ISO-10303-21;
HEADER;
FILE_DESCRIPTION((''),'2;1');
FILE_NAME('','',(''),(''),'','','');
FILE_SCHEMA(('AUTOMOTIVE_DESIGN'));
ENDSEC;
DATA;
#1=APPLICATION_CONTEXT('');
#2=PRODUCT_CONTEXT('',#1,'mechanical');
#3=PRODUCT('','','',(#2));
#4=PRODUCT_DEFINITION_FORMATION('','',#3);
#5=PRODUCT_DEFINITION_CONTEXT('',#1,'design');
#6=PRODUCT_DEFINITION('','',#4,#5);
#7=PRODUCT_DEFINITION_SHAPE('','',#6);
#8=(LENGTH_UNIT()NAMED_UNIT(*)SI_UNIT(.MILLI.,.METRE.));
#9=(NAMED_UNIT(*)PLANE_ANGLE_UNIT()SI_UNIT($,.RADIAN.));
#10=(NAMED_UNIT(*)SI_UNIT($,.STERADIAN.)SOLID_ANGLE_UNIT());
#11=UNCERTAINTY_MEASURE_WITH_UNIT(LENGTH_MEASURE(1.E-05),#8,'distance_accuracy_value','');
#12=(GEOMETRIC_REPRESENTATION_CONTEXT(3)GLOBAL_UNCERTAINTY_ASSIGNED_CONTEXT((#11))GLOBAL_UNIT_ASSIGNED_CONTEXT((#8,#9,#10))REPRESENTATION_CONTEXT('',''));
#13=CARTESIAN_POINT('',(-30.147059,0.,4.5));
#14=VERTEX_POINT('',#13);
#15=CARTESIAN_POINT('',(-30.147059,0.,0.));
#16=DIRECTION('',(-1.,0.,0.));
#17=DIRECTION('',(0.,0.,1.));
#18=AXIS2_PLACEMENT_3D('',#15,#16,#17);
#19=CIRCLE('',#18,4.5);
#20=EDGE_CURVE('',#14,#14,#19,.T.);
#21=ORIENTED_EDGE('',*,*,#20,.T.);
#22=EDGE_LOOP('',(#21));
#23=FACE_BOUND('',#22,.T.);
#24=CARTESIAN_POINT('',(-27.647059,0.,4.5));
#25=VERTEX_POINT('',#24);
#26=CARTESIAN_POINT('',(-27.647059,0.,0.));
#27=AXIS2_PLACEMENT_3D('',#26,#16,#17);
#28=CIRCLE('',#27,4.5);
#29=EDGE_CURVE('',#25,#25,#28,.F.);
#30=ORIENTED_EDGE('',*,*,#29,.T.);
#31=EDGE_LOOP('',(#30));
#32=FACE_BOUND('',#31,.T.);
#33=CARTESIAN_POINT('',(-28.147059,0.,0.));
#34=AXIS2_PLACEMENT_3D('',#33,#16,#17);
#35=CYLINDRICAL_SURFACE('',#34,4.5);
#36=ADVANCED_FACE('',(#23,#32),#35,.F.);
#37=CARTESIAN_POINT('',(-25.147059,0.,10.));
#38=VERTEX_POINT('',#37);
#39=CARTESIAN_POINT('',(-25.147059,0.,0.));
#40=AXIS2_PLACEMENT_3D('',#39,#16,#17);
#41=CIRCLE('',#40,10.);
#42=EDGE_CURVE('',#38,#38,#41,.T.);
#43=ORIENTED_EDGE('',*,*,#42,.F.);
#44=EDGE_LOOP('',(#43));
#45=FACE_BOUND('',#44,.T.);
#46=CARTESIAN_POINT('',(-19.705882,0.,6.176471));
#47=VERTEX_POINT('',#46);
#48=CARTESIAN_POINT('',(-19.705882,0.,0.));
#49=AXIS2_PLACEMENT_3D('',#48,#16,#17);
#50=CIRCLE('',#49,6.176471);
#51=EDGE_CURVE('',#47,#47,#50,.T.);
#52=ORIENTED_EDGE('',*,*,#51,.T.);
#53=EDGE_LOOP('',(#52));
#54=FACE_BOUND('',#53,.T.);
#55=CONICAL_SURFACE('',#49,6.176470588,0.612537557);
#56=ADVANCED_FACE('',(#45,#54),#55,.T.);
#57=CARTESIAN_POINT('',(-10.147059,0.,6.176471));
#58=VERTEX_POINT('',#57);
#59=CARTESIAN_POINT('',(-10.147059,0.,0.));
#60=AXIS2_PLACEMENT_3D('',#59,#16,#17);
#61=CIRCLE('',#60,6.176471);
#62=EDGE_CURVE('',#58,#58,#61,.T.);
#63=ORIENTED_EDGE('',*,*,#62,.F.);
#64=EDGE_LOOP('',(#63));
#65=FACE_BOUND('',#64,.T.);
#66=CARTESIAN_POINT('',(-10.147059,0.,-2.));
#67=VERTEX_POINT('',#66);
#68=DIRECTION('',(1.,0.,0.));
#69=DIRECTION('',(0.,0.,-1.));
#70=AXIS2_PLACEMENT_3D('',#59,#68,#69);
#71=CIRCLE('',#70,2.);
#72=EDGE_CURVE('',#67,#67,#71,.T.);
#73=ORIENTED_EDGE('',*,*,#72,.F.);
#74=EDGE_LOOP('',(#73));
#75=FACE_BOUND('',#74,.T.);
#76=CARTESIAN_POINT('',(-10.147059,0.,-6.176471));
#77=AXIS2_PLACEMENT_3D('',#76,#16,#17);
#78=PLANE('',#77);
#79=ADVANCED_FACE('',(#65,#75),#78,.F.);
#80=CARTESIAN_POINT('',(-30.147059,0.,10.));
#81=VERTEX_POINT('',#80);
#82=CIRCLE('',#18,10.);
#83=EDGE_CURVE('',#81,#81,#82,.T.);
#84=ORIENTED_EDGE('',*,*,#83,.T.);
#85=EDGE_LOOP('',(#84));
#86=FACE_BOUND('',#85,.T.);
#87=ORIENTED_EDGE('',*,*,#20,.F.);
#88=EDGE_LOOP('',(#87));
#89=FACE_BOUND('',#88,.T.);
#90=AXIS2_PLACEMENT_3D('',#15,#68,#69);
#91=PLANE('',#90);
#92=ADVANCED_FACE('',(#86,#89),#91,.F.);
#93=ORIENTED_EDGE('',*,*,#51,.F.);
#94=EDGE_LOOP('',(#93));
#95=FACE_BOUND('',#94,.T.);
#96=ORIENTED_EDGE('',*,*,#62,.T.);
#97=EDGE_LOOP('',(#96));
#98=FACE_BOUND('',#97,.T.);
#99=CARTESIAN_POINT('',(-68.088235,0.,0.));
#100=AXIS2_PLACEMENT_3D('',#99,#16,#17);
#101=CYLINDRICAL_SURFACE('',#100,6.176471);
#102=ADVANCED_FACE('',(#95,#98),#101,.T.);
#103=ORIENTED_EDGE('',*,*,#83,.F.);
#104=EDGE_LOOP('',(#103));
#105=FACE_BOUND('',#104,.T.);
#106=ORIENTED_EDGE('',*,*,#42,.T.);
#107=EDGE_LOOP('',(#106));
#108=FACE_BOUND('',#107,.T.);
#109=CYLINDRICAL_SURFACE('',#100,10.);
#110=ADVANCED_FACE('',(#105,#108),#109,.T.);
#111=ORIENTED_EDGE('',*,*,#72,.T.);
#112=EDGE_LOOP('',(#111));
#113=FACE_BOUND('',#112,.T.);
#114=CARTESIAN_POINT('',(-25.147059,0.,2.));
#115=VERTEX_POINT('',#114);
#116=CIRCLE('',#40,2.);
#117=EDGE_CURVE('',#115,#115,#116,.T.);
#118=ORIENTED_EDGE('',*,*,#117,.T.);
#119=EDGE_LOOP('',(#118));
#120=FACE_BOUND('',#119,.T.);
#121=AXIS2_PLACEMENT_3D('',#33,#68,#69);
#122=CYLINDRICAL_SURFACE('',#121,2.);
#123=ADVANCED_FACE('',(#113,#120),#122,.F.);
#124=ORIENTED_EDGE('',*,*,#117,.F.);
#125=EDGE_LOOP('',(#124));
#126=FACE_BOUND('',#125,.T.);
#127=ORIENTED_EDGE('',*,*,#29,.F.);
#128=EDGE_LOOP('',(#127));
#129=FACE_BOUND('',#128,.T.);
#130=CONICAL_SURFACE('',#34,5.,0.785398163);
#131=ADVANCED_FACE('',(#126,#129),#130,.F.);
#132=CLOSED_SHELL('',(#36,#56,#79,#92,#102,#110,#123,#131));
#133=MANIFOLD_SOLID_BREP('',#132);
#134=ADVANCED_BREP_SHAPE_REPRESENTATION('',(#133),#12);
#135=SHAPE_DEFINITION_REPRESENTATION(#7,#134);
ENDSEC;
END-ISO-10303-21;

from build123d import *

# Parameters (mm, degrees)
SKETCH2_R          = 2
CUT_EXTRUDE2_DEPTH = 18
SKETCH3_R          = 4.5
CUT_EXTRUDE3_DEPTH = 2
CHAMFER2_SIZE      = 3


with BuildPart() as part:
    # Sketch1 → Revolve1 (revolve)
    with BuildSketch(Plane(origin=(0, 0, 0), x_dir=(1, 0, 0), z_dir=(0, 1, 0)), mode=Mode.PRIVATE) as revolve1_sk:
        Polygon((-30.147058824, 0), (-30.147058824, 10), (-25.147058824, 10), (-19.705882353, 6.176470588), (-10.147058824, 6.176470588), (-10.147058824, 0), align=None)
    revolve(revolve1_sk.sketch.rotate(Axis((-68.088235294, 0, 0), (1, 0, 0)), 180), axis=Axis((-68.088235294, 0, 0), (1, 0, 0)))

    # Sketch2 → Cut-Extrude2 (cut)
    with BuildSketch(Plane(origin=(-10.147058824, 0, 0), x_dir=(0, 0, -1), z_dir=(1, 0, 0))):
        Circle(SKETCH2_R)
    extrude(amount=-CUT_EXTRUDE2_DEPTH, mode=Mode.SUBTRACT)

    # Sketch3 → Cut-Extrude3 (cut)
    with BuildSketch(Plane.ZY.offset(30.147058824)):
        Circle(SKETCH3_R)
    extrude(amount=-CUT_EXTRUDE3_DEPTH, mode=Mode.SUBTRACT)

    # Chamfer2
    # the kernel refuses this chamfer: 3 mm, written as the material it takes off along each edge
    with BuildSketch(Plane(origin=(-28.147058824, 0, 0), x_dir=(0, 0, -1), z_dir=(0, -1, 0))) as chamfer2_piece_1_section:
        Polygon((2 + CHAMFER2_SIZE, 0), (2, CHAMFER2_SIZE), (2, 0), align=None)
    chamfer2_piece_1 = revolve(axis=Axis((-28.147058824, 0, 0), (1, 0, 0)), mode=Mode.PRIVATE)
    chamfer2_piece_1 = chamfer2_piece_1 & Plane(origin=(-26.385999782, 0, 0), x_dir=(0, 0, 1), z_dir=(-1, 0, 0)) * Cylinder(4.5, 20, mode=Mode.PRIVATE)
    add(chamfer2_piece_1, mode=Mode.SUBTRACT)


solid = part.part
